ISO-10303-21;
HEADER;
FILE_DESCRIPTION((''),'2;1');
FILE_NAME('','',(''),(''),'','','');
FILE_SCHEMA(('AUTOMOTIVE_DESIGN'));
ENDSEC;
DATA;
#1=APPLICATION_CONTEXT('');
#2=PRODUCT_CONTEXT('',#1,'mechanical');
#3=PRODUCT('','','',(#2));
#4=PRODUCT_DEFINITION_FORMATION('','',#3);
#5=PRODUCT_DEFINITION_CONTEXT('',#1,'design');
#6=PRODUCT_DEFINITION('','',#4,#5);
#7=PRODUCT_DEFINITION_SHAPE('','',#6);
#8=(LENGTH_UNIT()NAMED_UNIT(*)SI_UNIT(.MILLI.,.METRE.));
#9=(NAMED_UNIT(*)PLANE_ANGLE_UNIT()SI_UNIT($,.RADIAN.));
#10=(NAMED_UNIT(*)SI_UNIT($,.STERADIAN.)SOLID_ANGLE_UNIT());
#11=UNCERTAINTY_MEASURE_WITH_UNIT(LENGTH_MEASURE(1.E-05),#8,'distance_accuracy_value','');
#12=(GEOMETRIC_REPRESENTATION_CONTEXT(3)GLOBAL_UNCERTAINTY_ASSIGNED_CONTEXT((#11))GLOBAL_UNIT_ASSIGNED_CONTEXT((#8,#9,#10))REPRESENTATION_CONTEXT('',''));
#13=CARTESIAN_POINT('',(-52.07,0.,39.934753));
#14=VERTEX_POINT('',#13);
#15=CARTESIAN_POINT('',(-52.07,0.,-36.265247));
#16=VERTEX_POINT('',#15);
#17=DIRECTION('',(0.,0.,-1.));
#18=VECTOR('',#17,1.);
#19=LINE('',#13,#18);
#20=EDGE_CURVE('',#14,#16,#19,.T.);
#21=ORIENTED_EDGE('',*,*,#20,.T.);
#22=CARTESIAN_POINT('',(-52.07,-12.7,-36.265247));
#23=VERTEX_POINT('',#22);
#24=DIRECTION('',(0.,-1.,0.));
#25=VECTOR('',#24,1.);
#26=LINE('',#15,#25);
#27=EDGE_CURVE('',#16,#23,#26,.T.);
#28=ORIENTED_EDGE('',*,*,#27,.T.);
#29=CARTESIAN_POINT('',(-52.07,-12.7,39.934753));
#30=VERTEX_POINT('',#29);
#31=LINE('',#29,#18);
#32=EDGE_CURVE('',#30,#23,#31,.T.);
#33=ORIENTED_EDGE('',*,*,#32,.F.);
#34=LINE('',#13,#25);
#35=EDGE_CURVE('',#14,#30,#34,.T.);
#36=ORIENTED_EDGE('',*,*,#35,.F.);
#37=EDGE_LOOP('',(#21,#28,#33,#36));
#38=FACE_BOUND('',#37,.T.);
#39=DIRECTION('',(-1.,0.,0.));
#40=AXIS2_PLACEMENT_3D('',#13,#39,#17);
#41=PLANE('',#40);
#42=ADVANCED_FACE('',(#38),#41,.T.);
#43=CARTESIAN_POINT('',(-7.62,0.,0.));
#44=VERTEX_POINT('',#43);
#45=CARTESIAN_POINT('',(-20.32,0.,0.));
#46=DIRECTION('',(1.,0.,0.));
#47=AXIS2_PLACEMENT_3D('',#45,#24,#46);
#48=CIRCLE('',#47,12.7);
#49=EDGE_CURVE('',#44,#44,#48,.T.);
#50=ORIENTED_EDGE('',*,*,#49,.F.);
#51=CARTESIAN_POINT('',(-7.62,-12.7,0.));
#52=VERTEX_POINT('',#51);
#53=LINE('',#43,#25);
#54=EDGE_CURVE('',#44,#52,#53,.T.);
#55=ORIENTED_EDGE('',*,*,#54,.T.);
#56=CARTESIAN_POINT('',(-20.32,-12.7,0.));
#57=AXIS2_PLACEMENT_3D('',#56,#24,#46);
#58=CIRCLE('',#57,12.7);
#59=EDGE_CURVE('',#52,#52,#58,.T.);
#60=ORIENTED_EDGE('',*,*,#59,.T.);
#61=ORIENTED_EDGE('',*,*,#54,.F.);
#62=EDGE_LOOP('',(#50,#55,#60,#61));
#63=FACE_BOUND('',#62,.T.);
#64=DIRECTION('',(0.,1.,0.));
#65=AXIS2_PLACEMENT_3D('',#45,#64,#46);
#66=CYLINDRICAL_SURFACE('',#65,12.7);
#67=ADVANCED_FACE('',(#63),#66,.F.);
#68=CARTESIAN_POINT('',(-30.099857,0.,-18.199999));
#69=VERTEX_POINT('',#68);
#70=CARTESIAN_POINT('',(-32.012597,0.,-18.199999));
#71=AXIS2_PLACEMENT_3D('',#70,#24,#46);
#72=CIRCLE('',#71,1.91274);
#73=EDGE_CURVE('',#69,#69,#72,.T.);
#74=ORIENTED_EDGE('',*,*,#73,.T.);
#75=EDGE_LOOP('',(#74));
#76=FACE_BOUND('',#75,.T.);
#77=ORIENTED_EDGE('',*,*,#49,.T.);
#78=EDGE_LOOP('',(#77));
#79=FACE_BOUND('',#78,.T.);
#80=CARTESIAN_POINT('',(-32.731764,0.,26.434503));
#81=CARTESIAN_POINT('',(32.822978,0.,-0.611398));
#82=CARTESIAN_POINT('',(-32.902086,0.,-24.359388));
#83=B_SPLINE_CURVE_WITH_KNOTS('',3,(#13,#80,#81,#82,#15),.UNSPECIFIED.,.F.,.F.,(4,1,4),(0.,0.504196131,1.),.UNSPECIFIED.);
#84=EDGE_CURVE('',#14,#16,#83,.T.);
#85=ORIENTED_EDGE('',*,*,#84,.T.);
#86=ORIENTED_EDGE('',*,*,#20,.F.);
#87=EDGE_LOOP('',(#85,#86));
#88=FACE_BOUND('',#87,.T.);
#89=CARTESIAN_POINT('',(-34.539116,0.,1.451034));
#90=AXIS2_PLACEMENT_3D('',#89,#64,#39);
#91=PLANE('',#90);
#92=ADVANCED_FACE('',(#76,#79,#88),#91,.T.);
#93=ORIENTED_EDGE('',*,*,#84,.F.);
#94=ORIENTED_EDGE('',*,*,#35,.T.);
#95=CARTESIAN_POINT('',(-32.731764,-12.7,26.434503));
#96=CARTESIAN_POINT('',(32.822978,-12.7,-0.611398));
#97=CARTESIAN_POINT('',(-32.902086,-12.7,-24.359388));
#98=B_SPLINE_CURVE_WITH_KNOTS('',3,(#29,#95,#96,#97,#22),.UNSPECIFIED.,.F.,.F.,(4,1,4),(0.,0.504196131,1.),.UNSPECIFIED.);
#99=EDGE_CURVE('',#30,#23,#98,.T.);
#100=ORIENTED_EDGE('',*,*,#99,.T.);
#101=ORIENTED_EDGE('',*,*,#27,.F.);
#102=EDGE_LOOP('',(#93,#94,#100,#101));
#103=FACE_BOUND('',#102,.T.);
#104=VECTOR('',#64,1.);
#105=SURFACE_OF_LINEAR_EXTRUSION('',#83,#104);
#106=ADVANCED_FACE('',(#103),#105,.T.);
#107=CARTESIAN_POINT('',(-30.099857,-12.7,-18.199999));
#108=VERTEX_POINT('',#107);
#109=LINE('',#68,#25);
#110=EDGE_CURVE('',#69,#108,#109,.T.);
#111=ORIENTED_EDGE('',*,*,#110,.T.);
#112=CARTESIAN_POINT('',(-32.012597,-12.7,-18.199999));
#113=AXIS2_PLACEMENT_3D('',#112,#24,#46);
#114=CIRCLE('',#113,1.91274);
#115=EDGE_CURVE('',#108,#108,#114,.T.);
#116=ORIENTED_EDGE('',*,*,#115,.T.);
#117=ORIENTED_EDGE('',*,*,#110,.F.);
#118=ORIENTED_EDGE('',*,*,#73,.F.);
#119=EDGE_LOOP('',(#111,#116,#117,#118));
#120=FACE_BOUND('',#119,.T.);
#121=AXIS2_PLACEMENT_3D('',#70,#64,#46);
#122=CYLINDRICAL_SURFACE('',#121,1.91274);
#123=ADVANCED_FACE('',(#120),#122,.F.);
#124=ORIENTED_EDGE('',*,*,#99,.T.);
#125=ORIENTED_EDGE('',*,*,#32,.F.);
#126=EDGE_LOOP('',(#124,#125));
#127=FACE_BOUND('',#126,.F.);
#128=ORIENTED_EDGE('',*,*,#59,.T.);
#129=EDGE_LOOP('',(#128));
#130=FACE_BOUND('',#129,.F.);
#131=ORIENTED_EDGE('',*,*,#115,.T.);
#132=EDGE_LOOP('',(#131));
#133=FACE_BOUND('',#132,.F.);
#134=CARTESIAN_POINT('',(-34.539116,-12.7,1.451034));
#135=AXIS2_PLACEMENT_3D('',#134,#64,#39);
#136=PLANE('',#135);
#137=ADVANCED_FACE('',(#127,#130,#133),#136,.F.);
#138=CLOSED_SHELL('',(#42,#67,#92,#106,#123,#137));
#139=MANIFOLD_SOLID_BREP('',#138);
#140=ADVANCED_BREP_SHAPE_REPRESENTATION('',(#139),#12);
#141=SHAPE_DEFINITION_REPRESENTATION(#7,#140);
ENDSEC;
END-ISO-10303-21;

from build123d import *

# Parameters (mm, degrees)
F0_R     = 1.9127396408
F0_R_2   = 12.7
F1_DEPTH = 12.7
F2_DEPTH = 25.4


# Not quite as in the source:
# - the program builds the solid bodies; features that only make, move or delete a surface that nothing else refers to are left out


with BuildPart() as f1:
    # F0 (on Front) → F1 (new body, symmetric)
    with BuildSketch(Plane.XZ):
        with BuildLine():
            add(Edge.make_bspline(
                [(-52.07, 39.934753072), (-32.7317643122, 26.4345029642), (32.8229777519, -0.6113982397), (-32.9020863732, -24.3593875318), (-52.07, -36.265246928)],
                knots=[0, 0, 0, 0, 0.5041961308, 1, 1, 1, 1], degree=3))
            Line((-52.07, 39.934753072), (-52.07, -36.265246928))
        make_face()
        with Locations((-32.0125967264, -18.1999988854)):
            Circle(F0_R, mode=Mode.SUBTRACT)
        with Locations((-20.32, 0)):
            Circle(F0_R_2, mode=Mode.SUBTRACT)
    extrude(amount=F1_DEPTH, both=True)

    # F0 (on Front) → F2 (cut)
    with BuildSketch(Plane.XZ):
        with BuildLine():
            add(Edge.make_bspline(
                [(-52.07, 39.934753072), (-32.7317643122, 26.4345029642), (32.8229777519, -0.6113982397), (-32.9020863732, -24.3593875318), (-52.07, -36.265246928)],
                knots=[0, 0, 0, 0, 0.5041961308, 1, 1, 1, 1], degree=3))
            Line((-52.07, 39.934753072), (-52.07, -36.265246928))
        make_face()
        with Locations((-32.0125967264, -18.1999988854)):
            Circle(F0_R, mode=Mode.SUBTRACT)
        with Locations((-20.32, 0)):
            Circle(F0_R_2, mode=Mode.SUBTRACT)
    extrude(amount=-F2_DEPTH, mode=Mode.SUBTRACT)


solid = f1.part
